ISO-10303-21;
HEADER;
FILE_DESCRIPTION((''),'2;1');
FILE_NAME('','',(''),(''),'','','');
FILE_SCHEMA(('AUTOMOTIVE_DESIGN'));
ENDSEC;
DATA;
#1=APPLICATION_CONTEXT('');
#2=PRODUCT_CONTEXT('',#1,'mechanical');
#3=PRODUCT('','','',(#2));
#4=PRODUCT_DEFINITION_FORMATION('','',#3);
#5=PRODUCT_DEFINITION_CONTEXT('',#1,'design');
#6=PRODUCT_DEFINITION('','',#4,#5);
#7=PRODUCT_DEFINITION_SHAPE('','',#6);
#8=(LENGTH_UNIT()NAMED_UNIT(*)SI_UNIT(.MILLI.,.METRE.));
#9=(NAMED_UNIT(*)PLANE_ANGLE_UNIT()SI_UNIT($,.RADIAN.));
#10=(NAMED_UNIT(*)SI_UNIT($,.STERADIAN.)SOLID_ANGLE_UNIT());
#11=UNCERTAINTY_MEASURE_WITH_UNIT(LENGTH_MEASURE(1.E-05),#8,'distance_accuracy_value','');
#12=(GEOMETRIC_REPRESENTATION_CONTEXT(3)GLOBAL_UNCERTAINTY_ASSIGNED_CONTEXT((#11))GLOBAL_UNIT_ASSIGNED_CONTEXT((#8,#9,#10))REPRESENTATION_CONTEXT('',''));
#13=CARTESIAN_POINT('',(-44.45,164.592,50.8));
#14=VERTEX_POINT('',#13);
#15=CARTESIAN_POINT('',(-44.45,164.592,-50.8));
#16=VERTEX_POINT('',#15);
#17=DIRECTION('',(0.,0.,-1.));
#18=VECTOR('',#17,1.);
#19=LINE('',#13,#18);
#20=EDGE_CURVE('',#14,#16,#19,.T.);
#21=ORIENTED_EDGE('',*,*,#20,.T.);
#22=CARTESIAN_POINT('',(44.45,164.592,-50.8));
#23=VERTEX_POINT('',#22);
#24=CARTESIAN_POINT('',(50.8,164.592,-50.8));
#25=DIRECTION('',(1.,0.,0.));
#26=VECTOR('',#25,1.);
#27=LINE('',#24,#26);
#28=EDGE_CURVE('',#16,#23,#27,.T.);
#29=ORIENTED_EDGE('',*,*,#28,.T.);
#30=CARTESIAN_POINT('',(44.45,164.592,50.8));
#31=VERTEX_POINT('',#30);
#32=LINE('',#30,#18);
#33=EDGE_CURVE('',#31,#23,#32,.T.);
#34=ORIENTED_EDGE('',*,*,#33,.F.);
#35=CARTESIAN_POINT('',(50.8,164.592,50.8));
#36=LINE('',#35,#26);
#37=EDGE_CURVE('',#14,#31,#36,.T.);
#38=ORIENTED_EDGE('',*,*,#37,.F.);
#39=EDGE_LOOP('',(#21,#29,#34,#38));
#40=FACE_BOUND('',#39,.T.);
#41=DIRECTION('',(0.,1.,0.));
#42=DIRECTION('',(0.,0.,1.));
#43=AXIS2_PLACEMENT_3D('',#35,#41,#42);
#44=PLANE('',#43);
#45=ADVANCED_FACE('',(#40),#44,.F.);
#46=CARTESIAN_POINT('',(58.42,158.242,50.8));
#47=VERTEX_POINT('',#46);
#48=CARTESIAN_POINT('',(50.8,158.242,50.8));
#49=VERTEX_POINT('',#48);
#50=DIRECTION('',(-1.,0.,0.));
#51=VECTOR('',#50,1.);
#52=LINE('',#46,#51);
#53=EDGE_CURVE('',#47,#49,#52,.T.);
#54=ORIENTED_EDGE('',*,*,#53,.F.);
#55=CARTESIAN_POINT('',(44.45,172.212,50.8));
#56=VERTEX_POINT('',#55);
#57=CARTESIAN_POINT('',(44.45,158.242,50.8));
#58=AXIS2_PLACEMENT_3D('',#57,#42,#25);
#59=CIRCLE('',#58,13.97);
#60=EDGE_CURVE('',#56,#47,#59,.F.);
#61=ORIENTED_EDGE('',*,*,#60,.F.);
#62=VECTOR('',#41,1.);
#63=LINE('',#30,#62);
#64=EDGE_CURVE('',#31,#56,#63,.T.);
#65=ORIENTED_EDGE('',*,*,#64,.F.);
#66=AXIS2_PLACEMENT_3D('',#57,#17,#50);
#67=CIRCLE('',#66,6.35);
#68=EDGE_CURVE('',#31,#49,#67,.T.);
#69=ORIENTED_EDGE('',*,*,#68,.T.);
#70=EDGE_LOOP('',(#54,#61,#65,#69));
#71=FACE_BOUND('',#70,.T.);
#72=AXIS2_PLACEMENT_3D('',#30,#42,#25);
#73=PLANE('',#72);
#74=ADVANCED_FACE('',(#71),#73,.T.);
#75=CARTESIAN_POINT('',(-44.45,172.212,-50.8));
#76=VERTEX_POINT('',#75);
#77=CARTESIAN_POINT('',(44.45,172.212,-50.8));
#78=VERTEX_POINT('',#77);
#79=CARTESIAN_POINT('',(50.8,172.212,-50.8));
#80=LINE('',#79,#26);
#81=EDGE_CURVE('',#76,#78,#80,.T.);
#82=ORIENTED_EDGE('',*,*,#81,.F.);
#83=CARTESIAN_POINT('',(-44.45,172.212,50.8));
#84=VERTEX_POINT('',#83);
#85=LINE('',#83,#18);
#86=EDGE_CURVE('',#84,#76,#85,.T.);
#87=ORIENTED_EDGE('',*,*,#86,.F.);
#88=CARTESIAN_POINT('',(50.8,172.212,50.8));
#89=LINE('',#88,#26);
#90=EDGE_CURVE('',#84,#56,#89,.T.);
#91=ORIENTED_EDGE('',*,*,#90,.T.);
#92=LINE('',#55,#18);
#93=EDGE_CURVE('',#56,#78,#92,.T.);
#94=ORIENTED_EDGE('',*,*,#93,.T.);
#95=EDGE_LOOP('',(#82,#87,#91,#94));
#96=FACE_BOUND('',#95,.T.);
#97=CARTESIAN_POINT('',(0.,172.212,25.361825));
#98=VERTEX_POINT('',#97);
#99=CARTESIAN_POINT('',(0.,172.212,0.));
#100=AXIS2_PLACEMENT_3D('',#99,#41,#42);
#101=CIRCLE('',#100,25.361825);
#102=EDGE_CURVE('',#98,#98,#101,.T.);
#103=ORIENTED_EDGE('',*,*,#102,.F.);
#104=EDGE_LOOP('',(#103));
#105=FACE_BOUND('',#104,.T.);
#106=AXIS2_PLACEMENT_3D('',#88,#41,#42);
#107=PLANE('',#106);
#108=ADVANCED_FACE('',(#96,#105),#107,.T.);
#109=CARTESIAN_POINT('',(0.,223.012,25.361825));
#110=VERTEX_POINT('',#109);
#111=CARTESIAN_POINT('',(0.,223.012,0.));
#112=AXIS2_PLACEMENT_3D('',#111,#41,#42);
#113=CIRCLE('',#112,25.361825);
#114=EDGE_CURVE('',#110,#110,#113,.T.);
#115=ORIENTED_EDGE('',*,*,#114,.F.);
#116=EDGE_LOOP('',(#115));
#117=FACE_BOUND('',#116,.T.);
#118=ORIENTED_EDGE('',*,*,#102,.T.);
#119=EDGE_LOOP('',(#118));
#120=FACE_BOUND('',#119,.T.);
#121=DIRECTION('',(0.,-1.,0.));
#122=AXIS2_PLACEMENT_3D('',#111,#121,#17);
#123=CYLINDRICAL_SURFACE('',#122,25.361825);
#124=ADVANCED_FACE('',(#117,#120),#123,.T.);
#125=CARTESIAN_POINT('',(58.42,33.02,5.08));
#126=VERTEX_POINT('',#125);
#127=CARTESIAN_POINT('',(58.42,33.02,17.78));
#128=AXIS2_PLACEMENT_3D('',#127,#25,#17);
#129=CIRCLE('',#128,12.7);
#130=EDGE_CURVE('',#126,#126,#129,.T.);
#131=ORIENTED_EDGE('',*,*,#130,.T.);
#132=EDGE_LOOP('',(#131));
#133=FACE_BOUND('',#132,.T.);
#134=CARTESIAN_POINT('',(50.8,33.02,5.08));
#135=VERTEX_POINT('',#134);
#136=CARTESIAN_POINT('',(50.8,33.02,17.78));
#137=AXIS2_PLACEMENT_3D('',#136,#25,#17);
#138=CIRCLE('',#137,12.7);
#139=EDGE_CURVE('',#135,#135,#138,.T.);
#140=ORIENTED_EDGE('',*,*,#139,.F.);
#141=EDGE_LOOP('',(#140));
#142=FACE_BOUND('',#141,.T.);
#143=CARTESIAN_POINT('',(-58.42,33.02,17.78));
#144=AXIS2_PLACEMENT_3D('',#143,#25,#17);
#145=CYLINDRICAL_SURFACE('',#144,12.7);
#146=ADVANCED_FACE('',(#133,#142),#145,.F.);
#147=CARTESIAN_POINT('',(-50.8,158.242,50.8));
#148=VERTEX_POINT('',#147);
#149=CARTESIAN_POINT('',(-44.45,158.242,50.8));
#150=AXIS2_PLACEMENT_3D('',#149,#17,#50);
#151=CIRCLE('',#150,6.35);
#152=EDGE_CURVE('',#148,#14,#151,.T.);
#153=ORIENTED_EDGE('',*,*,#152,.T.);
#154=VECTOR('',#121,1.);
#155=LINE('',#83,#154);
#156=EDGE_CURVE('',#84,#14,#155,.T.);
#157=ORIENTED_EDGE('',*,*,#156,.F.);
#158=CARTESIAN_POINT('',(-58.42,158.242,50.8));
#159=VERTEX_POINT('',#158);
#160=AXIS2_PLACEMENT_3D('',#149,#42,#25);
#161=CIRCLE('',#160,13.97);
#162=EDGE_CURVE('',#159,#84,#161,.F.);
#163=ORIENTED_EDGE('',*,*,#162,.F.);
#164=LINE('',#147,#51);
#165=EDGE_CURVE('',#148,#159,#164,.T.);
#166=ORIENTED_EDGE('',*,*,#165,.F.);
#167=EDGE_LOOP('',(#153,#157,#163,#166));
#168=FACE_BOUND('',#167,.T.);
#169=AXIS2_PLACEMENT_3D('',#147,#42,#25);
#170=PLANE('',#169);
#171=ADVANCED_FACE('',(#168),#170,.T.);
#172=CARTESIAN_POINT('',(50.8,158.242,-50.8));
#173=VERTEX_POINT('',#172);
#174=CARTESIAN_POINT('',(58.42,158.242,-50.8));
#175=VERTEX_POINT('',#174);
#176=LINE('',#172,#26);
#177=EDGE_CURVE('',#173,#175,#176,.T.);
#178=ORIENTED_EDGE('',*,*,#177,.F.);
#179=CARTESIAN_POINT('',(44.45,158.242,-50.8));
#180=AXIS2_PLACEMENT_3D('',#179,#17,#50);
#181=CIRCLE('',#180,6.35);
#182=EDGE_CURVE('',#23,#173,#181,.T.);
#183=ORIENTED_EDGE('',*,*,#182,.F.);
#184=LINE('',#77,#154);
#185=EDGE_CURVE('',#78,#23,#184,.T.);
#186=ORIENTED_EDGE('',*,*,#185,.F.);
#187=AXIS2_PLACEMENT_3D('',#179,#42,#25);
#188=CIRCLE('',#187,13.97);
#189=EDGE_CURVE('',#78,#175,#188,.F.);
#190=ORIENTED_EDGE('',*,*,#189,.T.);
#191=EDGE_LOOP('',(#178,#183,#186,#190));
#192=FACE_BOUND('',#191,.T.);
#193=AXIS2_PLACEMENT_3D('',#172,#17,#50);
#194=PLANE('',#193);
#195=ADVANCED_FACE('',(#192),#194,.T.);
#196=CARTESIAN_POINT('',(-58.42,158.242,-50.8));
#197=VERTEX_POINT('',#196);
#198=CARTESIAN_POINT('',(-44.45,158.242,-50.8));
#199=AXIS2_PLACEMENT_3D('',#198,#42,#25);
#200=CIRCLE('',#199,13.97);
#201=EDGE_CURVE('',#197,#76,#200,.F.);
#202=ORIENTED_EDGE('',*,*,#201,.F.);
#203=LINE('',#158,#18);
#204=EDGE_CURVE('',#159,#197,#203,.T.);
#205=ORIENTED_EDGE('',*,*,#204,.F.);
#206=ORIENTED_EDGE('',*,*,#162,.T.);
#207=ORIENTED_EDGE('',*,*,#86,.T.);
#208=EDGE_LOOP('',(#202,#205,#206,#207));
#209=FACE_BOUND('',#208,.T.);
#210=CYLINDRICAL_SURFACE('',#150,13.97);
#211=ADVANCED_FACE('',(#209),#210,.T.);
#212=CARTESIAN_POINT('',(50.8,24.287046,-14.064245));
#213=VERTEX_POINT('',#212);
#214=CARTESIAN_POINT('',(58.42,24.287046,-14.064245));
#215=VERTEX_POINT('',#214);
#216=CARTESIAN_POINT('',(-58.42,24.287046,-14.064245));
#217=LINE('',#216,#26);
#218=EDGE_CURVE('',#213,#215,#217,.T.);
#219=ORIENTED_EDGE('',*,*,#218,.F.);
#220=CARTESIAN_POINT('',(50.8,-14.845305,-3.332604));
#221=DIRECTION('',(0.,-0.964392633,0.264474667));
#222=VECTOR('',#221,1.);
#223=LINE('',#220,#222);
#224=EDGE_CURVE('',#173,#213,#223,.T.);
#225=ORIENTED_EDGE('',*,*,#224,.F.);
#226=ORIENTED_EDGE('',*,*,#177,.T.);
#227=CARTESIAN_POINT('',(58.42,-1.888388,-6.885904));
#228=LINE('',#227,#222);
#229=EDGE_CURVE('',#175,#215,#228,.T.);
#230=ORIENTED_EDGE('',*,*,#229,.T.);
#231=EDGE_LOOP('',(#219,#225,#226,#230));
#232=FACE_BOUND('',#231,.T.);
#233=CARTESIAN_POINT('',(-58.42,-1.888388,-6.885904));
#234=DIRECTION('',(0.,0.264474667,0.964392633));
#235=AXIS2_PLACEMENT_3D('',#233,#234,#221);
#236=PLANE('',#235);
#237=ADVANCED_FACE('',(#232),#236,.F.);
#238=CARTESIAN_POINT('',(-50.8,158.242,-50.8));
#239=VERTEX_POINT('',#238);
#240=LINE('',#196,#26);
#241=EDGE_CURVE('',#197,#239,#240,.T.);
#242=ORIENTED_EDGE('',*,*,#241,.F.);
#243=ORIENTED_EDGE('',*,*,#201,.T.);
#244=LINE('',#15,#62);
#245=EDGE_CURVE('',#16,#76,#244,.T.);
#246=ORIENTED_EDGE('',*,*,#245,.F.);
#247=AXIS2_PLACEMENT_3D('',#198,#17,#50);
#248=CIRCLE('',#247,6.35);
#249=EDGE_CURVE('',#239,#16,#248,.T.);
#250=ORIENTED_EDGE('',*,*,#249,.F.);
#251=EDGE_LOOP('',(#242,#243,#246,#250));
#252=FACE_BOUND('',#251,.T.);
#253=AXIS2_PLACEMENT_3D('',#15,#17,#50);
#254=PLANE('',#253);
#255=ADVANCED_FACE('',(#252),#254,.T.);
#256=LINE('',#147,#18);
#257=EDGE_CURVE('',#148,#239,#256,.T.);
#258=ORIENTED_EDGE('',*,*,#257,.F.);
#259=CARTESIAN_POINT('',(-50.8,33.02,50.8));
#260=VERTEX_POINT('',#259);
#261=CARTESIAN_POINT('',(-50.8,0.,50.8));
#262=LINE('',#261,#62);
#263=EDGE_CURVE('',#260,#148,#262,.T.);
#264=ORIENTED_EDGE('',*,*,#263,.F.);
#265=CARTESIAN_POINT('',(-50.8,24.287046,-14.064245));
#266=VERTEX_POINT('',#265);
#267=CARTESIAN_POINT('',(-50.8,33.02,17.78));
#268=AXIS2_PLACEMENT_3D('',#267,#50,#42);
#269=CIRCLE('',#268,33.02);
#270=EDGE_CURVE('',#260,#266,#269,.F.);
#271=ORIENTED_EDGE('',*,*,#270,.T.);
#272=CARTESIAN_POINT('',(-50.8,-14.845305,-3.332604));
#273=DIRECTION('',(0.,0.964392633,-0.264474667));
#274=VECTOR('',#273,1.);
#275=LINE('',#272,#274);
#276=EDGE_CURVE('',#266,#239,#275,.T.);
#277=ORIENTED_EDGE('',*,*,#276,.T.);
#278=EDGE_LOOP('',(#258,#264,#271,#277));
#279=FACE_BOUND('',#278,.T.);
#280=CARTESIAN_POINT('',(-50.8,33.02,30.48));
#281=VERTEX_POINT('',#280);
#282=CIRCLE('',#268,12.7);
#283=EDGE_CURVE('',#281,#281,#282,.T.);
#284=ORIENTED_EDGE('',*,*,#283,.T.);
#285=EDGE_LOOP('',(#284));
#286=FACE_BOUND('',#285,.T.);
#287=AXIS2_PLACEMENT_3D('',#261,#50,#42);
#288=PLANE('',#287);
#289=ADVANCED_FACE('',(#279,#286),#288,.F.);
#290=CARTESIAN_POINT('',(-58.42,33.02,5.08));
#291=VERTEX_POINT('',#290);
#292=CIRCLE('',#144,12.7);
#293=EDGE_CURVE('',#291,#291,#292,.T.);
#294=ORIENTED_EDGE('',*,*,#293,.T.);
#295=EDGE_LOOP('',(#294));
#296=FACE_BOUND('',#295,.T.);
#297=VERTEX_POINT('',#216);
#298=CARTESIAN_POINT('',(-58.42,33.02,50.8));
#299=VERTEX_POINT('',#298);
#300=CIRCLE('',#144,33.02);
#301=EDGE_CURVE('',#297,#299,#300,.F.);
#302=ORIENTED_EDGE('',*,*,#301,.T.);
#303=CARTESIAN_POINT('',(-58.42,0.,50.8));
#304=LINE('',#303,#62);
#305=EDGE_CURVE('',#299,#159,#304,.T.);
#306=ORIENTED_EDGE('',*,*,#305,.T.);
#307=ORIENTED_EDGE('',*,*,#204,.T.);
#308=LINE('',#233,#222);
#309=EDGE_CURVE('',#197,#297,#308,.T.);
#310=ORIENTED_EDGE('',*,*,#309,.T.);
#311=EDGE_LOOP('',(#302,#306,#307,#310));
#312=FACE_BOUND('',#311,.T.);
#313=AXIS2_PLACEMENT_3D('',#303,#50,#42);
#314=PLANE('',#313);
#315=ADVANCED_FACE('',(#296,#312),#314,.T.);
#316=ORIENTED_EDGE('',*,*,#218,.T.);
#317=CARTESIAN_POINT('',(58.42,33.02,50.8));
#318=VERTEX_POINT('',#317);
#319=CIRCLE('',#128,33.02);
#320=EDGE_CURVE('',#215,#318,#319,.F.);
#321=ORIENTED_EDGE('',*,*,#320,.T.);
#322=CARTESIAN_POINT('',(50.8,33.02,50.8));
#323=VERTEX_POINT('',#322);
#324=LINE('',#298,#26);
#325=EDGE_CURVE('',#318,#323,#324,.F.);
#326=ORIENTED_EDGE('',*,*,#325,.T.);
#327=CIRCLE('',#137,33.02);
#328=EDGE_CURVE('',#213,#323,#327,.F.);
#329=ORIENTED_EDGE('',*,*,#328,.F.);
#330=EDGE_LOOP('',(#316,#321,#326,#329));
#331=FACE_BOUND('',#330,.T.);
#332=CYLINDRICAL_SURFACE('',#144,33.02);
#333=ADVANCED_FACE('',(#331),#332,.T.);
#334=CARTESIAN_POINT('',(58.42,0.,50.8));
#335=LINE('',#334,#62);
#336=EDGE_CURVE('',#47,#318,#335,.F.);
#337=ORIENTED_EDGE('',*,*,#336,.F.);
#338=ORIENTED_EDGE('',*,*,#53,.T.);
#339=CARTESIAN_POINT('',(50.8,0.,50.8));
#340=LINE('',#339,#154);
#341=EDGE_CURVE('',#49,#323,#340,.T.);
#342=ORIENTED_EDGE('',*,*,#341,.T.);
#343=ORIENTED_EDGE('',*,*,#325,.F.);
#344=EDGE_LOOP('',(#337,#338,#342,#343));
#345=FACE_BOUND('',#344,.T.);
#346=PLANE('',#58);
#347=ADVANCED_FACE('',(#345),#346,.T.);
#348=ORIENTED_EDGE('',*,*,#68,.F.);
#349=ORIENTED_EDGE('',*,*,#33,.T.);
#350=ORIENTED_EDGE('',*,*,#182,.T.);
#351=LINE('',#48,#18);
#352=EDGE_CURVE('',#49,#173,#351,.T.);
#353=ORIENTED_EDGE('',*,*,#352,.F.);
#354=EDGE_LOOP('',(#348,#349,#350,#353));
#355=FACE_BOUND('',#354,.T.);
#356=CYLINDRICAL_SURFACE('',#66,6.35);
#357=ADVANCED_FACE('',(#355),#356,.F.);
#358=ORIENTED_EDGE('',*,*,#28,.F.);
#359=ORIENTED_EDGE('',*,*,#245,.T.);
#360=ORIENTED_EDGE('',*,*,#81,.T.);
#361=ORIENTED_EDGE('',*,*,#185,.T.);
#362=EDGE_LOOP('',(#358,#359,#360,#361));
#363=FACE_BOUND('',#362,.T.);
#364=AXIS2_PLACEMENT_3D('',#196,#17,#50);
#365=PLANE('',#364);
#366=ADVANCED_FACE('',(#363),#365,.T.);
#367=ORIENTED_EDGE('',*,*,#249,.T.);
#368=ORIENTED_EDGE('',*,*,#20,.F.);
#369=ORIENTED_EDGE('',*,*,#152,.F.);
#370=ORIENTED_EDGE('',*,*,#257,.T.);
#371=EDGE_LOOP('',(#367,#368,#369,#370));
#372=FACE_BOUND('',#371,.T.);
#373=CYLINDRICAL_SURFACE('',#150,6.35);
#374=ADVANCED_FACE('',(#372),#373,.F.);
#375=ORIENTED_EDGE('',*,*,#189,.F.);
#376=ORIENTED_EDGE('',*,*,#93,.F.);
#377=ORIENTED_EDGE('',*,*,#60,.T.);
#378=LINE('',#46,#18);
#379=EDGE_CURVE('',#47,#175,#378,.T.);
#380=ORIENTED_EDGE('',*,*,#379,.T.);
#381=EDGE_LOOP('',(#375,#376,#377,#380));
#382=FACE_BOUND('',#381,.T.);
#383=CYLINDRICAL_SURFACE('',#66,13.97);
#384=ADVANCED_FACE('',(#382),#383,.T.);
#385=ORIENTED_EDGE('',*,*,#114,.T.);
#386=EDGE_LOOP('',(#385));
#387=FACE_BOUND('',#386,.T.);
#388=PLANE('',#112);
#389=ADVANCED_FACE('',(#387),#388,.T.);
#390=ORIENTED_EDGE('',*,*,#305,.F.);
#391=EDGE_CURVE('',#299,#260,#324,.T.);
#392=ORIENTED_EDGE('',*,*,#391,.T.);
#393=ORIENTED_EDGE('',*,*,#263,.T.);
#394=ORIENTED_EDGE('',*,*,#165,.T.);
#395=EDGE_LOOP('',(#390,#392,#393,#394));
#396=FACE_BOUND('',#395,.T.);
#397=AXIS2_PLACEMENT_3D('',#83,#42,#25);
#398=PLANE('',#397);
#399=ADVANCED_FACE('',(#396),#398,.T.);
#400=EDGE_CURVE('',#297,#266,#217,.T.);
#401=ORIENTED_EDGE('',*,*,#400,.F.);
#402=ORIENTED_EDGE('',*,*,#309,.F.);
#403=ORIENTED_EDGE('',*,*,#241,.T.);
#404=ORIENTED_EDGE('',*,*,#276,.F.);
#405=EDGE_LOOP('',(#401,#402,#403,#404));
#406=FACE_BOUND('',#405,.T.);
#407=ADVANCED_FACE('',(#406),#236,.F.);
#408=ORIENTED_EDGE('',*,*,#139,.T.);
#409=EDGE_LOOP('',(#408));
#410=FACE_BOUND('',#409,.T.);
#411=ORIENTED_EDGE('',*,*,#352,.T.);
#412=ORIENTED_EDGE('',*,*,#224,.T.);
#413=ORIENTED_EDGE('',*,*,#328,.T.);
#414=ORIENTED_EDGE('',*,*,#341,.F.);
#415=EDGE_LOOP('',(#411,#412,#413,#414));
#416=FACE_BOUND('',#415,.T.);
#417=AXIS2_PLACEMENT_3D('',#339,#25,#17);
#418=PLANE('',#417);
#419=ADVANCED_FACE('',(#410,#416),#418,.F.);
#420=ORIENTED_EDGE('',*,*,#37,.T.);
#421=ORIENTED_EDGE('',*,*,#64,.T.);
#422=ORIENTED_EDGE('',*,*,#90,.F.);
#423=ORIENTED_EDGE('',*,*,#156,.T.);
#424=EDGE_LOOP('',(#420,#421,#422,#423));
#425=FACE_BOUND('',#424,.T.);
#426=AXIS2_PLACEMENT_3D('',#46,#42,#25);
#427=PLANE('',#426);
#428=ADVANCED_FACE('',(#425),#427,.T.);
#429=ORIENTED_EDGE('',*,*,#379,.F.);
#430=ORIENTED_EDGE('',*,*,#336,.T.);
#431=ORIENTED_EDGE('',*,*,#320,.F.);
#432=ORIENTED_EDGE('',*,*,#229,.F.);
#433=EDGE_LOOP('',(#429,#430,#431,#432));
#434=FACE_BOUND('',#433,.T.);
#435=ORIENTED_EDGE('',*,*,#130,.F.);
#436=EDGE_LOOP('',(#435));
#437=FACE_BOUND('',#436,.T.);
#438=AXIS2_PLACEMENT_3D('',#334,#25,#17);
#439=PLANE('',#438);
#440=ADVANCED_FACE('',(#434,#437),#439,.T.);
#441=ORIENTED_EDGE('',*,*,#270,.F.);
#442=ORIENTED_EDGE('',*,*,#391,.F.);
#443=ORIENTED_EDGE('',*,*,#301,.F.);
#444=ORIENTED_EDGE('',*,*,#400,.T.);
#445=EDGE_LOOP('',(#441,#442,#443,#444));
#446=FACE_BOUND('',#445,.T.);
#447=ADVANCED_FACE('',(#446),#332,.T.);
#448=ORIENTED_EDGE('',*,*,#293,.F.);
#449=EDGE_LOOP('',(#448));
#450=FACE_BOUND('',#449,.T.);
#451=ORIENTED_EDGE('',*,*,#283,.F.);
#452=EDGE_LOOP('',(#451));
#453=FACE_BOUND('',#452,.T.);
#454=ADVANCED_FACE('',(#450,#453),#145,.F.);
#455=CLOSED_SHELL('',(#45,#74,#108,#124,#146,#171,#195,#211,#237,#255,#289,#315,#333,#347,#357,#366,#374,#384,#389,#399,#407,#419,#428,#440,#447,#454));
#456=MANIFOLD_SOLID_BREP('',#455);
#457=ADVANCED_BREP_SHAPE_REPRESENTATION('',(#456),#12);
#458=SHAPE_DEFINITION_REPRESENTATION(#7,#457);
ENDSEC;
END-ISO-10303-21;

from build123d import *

# Parameters (mm, degrees)
BASE_FLANGE1_DEPTH  = 50.8
SKETCH8_R           = 12.7
CUT_EXTRUDE2_DEPTH  = 215.217642934
SKETCH9_R           = 25.36182522
BOSS_EXTRUDE1_DEPTH = 50.8


# Sheet-metal steps are written as plain solids
with BuildPart() as part:
    # Sketch2 → Base-Flange1 (new, symmetric)
    with BuildSketch(Plane.XY):
        with BuildLine():
            Line((50.8, 0), (50.8, 158.242))
            ThreePointArc((50.8, 158.242), (48.940128061, 162.732128061), (44.45, 164.592))
            Line((44.45, 164.592), (-44.45, 164.592))
            ThreePointArc((-44.45, 164.592), (-48.940128061, 162.732128061), (-50.8, 158.242))
            Line((-50.8, 158.242), (-50.8, 0))
            Line((-50.8, 0), (-58.42, 0))
            Line((-58.42, 0), (-58.42, 158.242))
            ThreePointArc((-58.42, 158.242), (-54.328281733, 168.120281733), (-44.45, 172.212))
            Line((-44.45, 172.212), (44.45, 172.212))
            ThreePointArc((44.45, 172.212), (54.328281733, 168.120281733), (58.42, 158.242))
            Line((58.42, 158.242), (58.42, 0))
            Line((58.42, 0), (50.8, 0))
        make_face()
    extrude(amount=BASE_FLANGE1_DEPTH, both=True)

    # Sketch8 → Cut-Extrude2 (cut, through all)
    with BuildSketch(Plane(origin=(58.42, 0, 0), x_dir=(0, 0, -1), z_dir=(1, 0, 0))):
        with BuildLine():
            Line((50.8, 0), (50.8, 158.242))
            Line((50.8, 158.242), (14.064244739, 24.287046492))
            ThreePointArc((14.064244739, 24.287046492), (2.244463478, 6.764690776), (-17.78, 0))
            Line((-17.78, 0), (50.8, 0))
        make_face()
        with BuildLine():
            Line((-50.8, 0), (-17.78, 0))
            ThreePointArc((-17.78, 0), (-41.128665915, 9.671334085), (-50.8, 33.02))
            Line((-50.8, 33.02), (-50.8, 0))
        make_face()
        with Locations((-17.78, 33.02)):
            Circle(SKETCH8_R)
    extrude(amount=-CUT_EXTRUDE2_DEPTH, mode=Mode.SUBTRACT)

    # Sketch9 → Boss-Extrude1 (add)
    with BuildSketch(Plane(origin=(0, 172.212, 0), x_dir=(1, 0, 0), z_dir=(0, 1, 0))):
        with Locations(Location((0, 0, 0), (0, 0, 270))):
            Circle(SKETCH9_R)
    extrude(amount=BOSS_EXTRUDE1_DEPTH)


solid = part.part
